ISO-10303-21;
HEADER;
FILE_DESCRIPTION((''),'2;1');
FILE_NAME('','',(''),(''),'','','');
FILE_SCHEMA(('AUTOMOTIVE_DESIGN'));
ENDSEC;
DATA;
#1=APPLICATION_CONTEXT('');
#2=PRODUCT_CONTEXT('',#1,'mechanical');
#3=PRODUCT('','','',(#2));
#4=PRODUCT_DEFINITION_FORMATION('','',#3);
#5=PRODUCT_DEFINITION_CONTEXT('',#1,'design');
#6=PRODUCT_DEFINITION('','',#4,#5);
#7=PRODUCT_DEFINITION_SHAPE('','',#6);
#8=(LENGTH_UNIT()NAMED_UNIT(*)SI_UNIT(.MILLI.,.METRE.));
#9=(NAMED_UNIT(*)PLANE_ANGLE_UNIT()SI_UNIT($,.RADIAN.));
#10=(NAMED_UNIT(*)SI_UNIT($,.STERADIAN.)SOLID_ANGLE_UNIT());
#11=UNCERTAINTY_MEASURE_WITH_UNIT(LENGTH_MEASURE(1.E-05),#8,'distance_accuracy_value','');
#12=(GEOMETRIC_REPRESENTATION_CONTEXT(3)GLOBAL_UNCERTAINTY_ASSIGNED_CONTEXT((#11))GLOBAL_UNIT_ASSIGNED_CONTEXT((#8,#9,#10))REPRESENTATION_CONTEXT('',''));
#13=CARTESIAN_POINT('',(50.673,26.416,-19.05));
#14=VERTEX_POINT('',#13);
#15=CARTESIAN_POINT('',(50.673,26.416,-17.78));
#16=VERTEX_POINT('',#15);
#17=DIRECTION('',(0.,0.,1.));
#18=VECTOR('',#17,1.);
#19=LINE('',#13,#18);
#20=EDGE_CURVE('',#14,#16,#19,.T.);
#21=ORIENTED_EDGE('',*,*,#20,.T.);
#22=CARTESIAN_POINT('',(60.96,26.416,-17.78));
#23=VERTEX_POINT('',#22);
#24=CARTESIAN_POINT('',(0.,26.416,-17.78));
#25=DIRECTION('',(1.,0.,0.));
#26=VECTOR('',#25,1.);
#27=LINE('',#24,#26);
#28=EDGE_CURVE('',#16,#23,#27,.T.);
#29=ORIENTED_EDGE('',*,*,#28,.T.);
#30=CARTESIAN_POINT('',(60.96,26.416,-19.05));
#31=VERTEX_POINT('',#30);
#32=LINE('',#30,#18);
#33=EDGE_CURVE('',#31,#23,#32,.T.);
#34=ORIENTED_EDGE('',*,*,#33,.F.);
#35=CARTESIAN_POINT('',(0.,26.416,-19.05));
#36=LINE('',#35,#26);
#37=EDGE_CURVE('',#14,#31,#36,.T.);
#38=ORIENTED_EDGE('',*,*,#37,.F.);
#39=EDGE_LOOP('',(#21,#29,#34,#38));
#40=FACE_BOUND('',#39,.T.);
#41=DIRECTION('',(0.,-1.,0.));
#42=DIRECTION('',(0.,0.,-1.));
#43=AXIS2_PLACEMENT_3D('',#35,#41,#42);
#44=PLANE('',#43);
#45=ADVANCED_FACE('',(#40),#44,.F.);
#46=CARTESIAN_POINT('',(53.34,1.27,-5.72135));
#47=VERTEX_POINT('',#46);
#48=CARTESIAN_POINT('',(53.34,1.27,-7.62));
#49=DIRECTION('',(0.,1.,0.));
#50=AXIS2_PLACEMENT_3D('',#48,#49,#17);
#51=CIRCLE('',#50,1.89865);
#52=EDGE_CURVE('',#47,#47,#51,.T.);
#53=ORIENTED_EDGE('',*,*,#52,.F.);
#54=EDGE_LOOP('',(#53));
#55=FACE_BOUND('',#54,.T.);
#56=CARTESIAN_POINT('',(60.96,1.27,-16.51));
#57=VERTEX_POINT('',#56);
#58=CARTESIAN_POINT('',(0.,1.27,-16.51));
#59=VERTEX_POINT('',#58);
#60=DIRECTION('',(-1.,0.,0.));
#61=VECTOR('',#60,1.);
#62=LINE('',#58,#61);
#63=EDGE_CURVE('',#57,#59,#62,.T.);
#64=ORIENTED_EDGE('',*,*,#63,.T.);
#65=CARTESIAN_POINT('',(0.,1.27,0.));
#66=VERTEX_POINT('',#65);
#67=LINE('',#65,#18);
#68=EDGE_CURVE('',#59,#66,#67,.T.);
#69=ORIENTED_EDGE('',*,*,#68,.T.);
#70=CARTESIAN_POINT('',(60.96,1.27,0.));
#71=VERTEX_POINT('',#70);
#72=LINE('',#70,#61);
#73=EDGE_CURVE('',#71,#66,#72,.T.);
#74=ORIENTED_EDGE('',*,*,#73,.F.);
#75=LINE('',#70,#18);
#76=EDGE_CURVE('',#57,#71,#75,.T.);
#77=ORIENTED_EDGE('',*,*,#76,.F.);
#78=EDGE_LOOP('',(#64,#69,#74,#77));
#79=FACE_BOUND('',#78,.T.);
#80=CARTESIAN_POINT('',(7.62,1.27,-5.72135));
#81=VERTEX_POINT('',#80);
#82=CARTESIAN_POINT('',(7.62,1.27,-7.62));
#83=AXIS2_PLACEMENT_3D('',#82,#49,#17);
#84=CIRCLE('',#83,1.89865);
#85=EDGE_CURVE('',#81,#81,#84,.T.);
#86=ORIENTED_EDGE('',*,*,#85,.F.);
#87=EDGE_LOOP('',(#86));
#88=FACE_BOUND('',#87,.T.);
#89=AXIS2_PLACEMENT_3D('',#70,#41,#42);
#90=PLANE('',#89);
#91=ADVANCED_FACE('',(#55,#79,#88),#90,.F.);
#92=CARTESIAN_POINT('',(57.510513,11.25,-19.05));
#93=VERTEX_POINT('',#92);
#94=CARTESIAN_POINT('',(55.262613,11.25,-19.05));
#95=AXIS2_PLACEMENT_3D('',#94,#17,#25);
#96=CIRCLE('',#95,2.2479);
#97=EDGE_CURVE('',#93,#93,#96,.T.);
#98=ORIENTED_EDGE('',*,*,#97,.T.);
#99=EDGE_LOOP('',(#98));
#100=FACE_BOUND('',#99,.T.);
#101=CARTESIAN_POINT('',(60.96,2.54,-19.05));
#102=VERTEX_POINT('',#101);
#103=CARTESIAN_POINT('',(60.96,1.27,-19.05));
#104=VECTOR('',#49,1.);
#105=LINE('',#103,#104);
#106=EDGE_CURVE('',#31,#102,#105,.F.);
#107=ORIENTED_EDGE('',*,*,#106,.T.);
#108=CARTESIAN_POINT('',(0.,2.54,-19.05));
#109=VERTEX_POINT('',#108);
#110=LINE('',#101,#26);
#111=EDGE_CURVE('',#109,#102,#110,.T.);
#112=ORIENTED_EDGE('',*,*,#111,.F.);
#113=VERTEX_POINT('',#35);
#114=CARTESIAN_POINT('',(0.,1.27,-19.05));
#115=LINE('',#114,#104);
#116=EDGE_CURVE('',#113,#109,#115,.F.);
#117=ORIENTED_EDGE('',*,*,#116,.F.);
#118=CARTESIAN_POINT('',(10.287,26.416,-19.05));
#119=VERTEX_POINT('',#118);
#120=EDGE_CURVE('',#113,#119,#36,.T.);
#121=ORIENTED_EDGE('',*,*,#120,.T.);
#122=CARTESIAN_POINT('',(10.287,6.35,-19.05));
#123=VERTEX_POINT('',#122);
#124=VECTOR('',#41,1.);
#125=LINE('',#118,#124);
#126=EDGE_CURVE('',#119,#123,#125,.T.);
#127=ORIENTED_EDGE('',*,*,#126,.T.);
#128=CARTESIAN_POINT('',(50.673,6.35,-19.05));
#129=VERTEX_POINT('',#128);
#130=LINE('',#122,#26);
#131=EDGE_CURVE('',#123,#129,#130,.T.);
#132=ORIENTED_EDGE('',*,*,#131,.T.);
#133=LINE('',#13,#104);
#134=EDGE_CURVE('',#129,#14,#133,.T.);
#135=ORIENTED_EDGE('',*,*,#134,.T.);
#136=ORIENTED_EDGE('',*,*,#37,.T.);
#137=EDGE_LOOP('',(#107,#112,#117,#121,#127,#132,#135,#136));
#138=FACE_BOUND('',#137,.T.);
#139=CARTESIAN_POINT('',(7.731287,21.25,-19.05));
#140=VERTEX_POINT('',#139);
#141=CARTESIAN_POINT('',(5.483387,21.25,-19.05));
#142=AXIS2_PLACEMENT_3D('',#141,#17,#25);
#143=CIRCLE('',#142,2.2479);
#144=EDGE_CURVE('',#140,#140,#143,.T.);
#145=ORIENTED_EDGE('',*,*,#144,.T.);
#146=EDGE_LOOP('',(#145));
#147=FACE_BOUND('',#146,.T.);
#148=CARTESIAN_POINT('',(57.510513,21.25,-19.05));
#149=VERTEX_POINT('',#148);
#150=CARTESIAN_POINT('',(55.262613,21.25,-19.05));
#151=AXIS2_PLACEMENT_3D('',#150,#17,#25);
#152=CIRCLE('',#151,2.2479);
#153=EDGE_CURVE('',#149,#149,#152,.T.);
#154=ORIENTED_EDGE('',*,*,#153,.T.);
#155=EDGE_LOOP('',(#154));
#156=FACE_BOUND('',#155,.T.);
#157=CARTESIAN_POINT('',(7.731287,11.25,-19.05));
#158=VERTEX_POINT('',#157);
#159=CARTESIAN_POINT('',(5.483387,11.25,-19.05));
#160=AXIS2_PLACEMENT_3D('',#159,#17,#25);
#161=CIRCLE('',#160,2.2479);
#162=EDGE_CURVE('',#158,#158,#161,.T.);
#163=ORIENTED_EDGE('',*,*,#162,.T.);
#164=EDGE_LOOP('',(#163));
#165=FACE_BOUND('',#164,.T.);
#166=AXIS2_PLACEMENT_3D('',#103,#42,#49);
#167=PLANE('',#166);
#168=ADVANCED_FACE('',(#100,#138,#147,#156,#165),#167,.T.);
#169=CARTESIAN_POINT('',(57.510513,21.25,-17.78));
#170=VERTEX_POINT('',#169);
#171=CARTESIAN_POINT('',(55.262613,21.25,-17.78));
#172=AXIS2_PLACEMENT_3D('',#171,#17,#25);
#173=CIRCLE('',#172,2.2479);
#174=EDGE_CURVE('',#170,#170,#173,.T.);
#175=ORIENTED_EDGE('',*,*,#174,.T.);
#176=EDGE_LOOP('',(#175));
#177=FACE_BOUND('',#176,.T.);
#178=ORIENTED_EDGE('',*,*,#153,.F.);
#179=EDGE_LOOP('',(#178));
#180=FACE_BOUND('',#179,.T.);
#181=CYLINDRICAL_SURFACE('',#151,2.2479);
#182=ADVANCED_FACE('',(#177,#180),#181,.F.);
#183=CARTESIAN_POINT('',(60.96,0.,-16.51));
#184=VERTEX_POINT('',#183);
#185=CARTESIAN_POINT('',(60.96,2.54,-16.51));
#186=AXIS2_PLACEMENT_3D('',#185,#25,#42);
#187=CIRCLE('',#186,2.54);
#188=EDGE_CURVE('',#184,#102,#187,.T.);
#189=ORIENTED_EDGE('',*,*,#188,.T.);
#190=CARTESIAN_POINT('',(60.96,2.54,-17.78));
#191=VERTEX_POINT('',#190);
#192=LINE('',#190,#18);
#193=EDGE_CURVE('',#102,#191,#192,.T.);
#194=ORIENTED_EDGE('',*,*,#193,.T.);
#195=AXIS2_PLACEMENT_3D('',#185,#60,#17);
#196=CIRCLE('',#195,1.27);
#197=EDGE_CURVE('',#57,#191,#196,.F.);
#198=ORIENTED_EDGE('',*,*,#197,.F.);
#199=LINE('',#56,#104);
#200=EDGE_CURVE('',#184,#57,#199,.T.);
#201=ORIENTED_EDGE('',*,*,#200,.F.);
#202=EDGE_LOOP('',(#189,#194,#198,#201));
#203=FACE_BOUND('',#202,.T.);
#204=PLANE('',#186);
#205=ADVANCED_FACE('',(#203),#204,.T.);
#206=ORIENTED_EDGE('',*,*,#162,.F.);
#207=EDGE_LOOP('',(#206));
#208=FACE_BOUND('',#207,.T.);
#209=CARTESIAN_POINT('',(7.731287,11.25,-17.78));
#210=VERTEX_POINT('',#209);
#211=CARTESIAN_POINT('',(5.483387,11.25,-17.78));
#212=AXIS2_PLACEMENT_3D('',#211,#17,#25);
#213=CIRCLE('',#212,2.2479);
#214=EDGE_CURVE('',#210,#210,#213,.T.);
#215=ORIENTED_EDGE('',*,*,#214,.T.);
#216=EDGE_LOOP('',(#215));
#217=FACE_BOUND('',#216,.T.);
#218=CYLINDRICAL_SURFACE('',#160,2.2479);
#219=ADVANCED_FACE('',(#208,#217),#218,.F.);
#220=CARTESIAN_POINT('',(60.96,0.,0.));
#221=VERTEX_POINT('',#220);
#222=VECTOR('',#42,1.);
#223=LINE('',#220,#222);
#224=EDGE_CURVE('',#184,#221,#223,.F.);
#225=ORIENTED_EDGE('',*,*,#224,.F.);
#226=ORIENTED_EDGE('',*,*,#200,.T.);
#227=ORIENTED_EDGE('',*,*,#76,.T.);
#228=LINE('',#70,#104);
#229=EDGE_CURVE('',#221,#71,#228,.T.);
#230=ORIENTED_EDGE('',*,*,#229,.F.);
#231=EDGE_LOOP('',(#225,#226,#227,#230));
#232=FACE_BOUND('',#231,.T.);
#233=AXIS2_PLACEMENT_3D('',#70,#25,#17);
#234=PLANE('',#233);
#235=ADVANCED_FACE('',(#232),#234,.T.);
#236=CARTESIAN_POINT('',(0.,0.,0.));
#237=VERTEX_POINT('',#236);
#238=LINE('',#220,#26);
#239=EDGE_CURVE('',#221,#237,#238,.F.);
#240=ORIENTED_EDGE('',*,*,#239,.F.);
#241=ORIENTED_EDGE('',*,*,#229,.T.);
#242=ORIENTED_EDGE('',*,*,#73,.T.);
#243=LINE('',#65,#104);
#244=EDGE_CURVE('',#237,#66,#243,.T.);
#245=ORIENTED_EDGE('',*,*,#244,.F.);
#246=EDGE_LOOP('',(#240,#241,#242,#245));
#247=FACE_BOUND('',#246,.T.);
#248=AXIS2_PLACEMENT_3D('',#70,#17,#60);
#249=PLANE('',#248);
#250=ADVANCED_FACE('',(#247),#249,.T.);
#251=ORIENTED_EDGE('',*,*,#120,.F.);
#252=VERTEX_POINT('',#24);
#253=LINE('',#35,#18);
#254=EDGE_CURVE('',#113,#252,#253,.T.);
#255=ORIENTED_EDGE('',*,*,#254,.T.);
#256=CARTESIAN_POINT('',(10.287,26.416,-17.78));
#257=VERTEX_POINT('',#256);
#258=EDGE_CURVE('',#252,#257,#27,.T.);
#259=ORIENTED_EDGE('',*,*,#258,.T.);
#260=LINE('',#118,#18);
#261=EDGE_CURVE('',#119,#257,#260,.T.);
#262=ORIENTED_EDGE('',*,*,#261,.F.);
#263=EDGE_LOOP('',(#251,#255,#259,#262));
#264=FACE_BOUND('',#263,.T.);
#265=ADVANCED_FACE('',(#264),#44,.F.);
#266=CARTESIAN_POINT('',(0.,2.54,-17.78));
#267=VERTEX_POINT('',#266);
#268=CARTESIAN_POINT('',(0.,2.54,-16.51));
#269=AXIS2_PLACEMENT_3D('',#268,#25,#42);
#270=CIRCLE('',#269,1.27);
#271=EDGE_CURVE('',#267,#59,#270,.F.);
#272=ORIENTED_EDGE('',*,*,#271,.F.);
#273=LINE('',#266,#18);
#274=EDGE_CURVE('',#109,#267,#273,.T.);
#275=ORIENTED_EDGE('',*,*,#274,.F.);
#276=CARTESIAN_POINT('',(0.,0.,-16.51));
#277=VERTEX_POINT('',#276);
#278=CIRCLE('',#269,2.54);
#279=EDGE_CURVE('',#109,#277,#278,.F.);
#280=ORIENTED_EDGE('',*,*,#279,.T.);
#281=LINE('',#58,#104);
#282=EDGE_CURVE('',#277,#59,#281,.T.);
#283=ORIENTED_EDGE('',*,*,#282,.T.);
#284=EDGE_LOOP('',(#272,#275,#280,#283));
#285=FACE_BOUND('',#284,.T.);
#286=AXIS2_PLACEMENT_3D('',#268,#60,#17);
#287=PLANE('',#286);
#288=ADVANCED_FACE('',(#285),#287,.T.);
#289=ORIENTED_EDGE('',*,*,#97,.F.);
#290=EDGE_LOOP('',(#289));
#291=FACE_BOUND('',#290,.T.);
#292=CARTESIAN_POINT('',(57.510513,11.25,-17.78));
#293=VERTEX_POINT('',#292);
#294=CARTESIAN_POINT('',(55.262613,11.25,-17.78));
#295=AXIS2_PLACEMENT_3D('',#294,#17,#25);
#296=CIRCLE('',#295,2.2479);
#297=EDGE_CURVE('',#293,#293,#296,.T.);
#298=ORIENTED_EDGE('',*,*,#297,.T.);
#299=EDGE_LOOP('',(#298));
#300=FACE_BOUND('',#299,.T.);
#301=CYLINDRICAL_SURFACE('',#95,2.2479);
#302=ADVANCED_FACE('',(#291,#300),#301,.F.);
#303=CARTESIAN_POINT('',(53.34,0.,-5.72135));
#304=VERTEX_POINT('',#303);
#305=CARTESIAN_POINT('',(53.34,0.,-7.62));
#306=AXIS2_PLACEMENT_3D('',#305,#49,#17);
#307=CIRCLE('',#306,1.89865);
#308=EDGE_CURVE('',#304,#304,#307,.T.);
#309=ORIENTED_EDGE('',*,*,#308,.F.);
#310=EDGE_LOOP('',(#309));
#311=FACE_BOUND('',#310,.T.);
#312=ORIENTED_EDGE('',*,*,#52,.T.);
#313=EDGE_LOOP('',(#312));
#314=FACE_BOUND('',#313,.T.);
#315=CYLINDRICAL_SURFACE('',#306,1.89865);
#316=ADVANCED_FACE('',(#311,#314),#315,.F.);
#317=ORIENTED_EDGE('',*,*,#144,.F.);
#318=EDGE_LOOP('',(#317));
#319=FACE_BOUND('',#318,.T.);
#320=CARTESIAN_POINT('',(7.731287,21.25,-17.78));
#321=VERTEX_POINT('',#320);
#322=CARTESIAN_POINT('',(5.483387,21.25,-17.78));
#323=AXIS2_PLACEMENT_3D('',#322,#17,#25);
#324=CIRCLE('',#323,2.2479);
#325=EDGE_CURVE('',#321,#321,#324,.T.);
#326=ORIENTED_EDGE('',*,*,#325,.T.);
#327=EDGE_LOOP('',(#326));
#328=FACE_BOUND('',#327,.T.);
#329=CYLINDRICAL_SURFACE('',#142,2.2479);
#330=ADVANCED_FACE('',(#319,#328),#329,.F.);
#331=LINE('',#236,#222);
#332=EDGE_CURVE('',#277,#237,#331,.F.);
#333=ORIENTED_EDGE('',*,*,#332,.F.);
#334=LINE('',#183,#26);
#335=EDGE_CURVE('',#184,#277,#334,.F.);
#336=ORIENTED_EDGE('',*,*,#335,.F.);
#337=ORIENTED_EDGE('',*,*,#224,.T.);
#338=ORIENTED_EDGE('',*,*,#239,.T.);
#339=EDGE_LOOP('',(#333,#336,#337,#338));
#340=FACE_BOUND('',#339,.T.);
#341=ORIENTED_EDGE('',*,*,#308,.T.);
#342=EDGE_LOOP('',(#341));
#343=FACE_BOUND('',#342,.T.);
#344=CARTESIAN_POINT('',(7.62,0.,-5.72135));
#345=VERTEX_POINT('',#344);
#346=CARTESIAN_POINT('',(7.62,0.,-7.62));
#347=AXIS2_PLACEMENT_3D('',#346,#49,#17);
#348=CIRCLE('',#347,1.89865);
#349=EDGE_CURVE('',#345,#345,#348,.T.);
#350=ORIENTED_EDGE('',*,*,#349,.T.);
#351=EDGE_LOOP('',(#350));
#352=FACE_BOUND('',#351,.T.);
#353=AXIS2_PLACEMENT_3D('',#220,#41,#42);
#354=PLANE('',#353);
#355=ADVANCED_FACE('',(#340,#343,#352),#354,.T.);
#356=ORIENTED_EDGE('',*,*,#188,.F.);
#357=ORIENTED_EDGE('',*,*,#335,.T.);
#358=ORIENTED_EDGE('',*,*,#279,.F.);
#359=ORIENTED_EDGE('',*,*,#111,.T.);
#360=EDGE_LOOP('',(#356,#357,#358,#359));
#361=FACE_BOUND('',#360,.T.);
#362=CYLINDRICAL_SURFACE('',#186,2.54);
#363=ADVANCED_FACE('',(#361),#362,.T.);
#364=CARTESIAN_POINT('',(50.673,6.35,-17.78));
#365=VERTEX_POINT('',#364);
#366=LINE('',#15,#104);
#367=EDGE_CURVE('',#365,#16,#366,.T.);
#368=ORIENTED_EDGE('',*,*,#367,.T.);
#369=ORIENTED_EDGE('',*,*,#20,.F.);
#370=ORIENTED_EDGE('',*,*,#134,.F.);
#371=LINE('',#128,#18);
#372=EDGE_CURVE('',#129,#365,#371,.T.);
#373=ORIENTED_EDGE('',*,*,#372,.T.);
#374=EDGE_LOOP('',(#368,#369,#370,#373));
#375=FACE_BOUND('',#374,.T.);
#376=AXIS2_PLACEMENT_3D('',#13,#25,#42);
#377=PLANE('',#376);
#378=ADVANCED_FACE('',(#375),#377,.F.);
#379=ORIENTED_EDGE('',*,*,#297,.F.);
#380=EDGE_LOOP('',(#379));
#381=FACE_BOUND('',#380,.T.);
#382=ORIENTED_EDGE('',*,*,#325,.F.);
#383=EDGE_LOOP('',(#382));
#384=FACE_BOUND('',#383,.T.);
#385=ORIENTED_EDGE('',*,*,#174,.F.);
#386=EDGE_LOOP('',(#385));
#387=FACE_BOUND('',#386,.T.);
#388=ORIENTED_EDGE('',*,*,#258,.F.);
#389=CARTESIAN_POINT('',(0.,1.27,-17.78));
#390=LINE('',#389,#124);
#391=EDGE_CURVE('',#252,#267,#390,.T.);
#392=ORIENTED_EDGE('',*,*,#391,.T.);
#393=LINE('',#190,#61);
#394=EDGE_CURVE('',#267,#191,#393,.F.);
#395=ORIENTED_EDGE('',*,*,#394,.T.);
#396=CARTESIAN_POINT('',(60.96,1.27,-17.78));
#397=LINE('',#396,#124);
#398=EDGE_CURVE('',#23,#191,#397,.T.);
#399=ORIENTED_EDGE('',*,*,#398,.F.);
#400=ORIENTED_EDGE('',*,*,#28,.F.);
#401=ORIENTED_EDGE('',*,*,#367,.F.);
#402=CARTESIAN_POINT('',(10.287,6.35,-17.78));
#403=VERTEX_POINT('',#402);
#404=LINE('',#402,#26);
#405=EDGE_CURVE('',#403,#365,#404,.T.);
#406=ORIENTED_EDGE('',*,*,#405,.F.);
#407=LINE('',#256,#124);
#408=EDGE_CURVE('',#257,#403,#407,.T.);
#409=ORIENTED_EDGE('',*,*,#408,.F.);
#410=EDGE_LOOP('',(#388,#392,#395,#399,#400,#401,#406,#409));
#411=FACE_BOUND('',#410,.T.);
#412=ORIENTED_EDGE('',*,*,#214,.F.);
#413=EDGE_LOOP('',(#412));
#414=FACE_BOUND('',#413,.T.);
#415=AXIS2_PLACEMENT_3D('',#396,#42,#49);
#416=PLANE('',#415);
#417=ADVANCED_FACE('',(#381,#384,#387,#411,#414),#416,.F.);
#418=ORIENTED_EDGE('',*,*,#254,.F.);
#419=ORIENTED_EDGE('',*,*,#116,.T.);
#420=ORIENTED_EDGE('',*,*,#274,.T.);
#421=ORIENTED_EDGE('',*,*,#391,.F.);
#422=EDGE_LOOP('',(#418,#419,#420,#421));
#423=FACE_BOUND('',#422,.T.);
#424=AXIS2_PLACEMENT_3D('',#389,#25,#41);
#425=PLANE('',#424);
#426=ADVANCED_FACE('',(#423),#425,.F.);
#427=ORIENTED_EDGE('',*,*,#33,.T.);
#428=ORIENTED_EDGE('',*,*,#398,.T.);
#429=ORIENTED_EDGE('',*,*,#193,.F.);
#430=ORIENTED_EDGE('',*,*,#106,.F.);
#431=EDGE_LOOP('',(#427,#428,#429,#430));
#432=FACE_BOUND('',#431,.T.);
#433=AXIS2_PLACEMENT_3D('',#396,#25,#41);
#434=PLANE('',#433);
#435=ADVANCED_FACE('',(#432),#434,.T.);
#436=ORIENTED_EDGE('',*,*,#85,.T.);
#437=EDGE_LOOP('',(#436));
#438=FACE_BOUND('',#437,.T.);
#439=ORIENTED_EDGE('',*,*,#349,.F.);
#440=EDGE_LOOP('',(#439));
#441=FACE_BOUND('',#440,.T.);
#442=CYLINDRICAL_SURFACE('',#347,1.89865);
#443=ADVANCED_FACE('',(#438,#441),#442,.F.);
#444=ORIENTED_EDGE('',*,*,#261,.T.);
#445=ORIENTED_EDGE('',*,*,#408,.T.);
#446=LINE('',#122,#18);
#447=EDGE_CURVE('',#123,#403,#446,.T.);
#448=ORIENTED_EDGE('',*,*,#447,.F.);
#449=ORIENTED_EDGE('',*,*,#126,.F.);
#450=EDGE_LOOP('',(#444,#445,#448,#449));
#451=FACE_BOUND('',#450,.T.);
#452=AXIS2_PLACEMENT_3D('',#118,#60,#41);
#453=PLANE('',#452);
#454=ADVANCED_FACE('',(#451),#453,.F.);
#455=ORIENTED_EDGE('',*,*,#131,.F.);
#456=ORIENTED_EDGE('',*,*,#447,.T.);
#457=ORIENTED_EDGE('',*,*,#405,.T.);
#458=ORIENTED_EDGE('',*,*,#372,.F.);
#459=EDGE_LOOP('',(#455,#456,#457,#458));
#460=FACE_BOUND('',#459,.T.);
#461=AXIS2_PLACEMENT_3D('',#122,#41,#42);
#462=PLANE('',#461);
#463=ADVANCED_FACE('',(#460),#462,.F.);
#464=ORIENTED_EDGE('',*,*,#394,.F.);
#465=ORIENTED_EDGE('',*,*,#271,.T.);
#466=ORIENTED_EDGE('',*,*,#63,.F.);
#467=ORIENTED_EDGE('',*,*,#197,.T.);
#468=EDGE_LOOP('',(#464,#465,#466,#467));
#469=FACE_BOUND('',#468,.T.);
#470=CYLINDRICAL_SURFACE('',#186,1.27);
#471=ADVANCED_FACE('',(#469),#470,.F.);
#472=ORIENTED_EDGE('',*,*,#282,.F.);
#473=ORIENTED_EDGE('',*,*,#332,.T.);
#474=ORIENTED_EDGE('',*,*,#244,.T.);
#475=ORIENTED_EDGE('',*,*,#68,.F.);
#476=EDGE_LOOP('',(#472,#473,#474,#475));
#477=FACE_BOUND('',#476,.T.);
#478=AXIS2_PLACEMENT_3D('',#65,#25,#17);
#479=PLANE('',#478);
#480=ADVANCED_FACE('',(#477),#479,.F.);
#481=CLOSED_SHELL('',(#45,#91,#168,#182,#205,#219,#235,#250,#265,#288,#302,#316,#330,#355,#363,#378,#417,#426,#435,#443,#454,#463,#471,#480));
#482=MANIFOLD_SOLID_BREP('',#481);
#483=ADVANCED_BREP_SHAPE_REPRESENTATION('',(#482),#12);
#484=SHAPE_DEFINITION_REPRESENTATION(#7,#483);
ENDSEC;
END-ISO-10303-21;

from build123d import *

# Parameters (mm, degrees)
BOSS_EXTRUDE1_DEPTH    = 60.96
CONVERT_SOLID1_DEPTH   = 60.96
CONVERT_SOLID1_2_DEPTH = 60.96
SKETCH6_W              = 40.386
SKETCH6_H              = 20.066
CUT_EXTRUDE1_DEPTH     = 71.995158286
SKETCH8_R              = 1.89865
CUT_EXTRUDE2_DEPTH     = 71.767609116
SKETCH9_R              = 2.2479
CUT_EXTRUDE3_DEPTH     = 71.995158286
CUT_EXTRUDE4_DEPTH     = 71.995158286


# Read off the part's stored shape, not the designer's step: Convert-Solid1
with BuildPart() as part:
    # Sketch1 → Boss-Extrude1 (new body)
    with BuildSketch(Plane(origin=(0, 0, 0), x_dir=(0, 0, -1), z_dir=(1, 0, 0))):
        Polygon((0, 0), (19.05, 0), (19.05, 31.75), (17.78, 31.75), (17.78, 1.27), (0, 1.27), align=None)
    extrude(amount=BOSS_EXTRUDE1_DEPTH)

    # Convert-Solid1 outline → Convert-Solid1 (cut)
    with BuildSketch(Plane.YZ):
        with BuildLine():
            ThreePointArc((2.54, -19.05), (0.743948776, -18.306051224), (0, -16.51))
            Line((0, -16.51), (0, -19.05))
            Line((0, -19.05), (2.54, -19.05))
        make_face()
    extrude(amount=CONVERT_SOLID1_DEPTH, mode=Mode.SUBTRACT)

    # Convert-Solid1 2 outline → Convert-Solid1 2 (add)
    with BuildSketch(Plane.YZ):
        with BuildLine():
            ThreePointArc((2.54, -17.78), (1.641974388, -17.408025612), (1.27, -16.51))
            Line((1.27, -16.51), (1.27, -17.78))
            Line((1.27, -17.78), (2.54, -17.78))
        make_face()
    extrude(amount=CONVERT_SOLID1_2_DEPTH)

    # Sketch6 → Cut-Extrude1 (cut, through all)
    with BuildSketch(Plane.XY.offset(-17.78)):
        with Locations((30.48, 16.383)):
            Rectangle(SKETCH6_W, SKETCH6_H)
    extrude(amount=-CUT_EXTRUDE1_DEPTH, mode=Mode.SUBTRACT)

    # Sketch8 → Cut-Extrude2 (cut, through all)
    with BuildSketch(Plane(origin=(0, 1.27, 0), x_dir=(1, 0, 0), z_dir=(0, 1, 0))):
        with Locations(Location((7.62, 7.62, 0), (0, 0, 270))):
            Circle(SKETCH8_R)
        with Locations(Location((53.34, 7.62, 0), (0, 0, 270))):
            Circle(SKETCH8_R)
    extrude(amount=-CUT_EXTRUDE2_DEPTH, mode=Mode.SUBTRACT)

    # Sketch9 → Cut-Extrude3 (cut, through all)
    with BuildSketch(Plane.XY.offset(-17.78)):
        with Locations((5.483386699, 21.25)):
            Circle(SKETCH9_R)
        with Locations((5.483386699, 11.25)):
            Circle(SKETCH9_R)
        with Locations((55.262613301, 21.25)):
            Circle(SKETCH9_R)
        with Locations((55.262613301, 11.25)):
            Circle(SKETCH9_R)
    extrude(amount=-CUT_EXTRUDE3_DEPTH, mode=Mode.SUBTRACT)

    # Sketch10 → Cut-Extrude4 (cut, through all)
    with BuildSketch(Plane.XY.offset(-17.78)):
        Polygon((0, 26.416), (60.96, 26.416), (69.305073622, 29.055582779), (66.812292009, 41.145573602), (-9.342186268, 39.525265553), (-7.97115638, 29.055582779), (-7.223321897, 29.055582779), align=None)
    extrude(amount=-CUT_EXTRUDE4_DEPTH, mode=Mode.SUBTRACT)


solid = part.part
